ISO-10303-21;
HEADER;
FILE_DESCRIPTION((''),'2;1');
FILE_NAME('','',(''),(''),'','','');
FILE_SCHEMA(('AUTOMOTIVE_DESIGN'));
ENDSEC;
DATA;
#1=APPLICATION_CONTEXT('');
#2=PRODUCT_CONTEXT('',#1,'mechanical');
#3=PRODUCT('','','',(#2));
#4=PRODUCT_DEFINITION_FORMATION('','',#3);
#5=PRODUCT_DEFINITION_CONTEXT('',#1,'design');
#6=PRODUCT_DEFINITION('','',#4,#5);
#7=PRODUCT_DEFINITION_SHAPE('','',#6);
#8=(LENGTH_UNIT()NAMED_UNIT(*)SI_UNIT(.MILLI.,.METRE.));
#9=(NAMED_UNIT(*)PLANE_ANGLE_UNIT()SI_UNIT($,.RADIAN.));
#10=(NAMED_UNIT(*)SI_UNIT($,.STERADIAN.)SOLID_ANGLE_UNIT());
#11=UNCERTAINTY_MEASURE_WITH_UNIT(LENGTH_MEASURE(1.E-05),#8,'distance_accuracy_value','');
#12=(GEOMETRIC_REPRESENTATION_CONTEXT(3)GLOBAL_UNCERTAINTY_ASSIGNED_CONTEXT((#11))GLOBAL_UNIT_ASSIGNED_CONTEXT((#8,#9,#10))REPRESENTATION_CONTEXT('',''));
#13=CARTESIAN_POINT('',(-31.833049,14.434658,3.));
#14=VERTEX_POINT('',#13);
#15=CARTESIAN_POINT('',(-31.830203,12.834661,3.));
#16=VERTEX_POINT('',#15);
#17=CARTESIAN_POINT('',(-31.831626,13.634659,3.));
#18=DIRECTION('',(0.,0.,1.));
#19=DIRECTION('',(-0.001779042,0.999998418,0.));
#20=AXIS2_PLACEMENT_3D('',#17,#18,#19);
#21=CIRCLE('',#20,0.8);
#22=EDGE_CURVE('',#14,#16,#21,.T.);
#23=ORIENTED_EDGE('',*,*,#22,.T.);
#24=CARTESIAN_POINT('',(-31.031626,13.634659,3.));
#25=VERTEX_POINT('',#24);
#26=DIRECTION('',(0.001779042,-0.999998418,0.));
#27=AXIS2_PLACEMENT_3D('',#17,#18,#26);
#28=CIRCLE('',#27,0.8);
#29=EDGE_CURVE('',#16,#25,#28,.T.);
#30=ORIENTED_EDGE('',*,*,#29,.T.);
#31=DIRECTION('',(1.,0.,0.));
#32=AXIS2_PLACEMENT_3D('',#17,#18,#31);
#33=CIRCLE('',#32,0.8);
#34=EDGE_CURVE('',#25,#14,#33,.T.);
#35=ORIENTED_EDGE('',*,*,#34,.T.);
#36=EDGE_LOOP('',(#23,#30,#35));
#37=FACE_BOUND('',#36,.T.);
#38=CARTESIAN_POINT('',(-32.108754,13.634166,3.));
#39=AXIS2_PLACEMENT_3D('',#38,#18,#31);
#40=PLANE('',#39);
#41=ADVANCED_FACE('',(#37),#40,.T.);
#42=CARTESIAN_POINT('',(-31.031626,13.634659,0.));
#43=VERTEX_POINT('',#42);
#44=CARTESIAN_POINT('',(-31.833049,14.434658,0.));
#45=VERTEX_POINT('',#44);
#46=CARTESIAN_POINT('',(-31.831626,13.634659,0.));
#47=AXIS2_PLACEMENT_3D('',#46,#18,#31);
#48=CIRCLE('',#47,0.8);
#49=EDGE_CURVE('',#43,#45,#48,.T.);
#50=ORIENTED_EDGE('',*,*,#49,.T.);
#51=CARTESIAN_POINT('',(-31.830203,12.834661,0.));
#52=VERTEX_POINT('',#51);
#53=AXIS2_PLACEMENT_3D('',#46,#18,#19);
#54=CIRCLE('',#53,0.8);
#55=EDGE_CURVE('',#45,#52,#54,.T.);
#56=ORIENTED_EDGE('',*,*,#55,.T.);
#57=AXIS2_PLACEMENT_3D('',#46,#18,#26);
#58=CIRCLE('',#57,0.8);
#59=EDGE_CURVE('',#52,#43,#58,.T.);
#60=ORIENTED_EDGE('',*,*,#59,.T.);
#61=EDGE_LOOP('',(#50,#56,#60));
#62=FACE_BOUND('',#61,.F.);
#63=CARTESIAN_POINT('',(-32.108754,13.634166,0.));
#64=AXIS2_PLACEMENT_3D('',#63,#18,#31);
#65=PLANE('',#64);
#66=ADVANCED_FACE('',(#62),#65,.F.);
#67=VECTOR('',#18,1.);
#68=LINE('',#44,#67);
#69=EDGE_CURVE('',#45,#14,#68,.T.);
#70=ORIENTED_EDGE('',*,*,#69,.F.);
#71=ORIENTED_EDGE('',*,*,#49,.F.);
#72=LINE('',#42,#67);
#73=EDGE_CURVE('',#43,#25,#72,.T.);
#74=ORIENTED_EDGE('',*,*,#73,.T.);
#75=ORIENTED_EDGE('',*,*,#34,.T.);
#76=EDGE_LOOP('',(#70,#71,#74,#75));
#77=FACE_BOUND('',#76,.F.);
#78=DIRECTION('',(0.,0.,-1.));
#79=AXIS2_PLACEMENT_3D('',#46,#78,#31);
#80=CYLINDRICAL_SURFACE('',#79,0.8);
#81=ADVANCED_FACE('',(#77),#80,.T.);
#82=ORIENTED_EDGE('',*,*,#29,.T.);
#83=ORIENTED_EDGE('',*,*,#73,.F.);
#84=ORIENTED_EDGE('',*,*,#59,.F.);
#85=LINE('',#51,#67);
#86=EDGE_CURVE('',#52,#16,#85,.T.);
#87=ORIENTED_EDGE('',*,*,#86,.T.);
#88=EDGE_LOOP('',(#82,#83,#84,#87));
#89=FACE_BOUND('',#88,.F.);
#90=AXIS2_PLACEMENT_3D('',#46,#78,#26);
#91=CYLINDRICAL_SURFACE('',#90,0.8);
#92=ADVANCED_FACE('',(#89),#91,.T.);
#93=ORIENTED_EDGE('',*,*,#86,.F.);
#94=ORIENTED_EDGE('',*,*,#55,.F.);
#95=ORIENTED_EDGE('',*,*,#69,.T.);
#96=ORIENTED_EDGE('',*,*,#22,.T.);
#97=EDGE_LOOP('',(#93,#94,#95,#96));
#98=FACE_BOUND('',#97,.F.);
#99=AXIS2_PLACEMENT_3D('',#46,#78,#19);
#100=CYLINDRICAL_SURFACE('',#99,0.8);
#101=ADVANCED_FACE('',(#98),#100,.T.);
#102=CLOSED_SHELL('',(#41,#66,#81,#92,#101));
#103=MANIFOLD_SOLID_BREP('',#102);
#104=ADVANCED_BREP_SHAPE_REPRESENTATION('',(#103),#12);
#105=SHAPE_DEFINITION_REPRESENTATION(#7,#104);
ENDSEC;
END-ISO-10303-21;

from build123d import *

# Parameters (mm, degrees)
F1_DEPTH = 3


# Not quite as in the source:
# - the program builds the solid bodies; features that only make, move or delete a surface that nothing else refers to are left out


with BuildPart() as f1:
    # F0 (on Top) → F1 (new body)
    with BuildSketch(Plane.XY):
        with BuildLine():
            ThreePointArc((-31.8330490828, 14.4346580839), (-32.631624583, 13.6332361161), (-31.8302026152, 12.8346606159))
            Line((-31.8302026152, 12.8346606159), (-31.8330490828, 14.4346580839))
        make_face()
        with BuildLine():
            Line((-31.8330490828, 14.4346580839), (-31.8302026152, 12.8346606159))
            ThreePointArc((-31.8302026152, 12.8346606159), (-31.2654374585, 13.0694773381), (-31.031625849, 13.6346593499))
            ThreePointArc((-31.031625849, 13.6346593499), (-31.2664438372, 14.2008477404), (-31.8330490828, 14.4346580839))
        make_face()
    extrude(amount=F1_DEPTH)


solid = f1.part
